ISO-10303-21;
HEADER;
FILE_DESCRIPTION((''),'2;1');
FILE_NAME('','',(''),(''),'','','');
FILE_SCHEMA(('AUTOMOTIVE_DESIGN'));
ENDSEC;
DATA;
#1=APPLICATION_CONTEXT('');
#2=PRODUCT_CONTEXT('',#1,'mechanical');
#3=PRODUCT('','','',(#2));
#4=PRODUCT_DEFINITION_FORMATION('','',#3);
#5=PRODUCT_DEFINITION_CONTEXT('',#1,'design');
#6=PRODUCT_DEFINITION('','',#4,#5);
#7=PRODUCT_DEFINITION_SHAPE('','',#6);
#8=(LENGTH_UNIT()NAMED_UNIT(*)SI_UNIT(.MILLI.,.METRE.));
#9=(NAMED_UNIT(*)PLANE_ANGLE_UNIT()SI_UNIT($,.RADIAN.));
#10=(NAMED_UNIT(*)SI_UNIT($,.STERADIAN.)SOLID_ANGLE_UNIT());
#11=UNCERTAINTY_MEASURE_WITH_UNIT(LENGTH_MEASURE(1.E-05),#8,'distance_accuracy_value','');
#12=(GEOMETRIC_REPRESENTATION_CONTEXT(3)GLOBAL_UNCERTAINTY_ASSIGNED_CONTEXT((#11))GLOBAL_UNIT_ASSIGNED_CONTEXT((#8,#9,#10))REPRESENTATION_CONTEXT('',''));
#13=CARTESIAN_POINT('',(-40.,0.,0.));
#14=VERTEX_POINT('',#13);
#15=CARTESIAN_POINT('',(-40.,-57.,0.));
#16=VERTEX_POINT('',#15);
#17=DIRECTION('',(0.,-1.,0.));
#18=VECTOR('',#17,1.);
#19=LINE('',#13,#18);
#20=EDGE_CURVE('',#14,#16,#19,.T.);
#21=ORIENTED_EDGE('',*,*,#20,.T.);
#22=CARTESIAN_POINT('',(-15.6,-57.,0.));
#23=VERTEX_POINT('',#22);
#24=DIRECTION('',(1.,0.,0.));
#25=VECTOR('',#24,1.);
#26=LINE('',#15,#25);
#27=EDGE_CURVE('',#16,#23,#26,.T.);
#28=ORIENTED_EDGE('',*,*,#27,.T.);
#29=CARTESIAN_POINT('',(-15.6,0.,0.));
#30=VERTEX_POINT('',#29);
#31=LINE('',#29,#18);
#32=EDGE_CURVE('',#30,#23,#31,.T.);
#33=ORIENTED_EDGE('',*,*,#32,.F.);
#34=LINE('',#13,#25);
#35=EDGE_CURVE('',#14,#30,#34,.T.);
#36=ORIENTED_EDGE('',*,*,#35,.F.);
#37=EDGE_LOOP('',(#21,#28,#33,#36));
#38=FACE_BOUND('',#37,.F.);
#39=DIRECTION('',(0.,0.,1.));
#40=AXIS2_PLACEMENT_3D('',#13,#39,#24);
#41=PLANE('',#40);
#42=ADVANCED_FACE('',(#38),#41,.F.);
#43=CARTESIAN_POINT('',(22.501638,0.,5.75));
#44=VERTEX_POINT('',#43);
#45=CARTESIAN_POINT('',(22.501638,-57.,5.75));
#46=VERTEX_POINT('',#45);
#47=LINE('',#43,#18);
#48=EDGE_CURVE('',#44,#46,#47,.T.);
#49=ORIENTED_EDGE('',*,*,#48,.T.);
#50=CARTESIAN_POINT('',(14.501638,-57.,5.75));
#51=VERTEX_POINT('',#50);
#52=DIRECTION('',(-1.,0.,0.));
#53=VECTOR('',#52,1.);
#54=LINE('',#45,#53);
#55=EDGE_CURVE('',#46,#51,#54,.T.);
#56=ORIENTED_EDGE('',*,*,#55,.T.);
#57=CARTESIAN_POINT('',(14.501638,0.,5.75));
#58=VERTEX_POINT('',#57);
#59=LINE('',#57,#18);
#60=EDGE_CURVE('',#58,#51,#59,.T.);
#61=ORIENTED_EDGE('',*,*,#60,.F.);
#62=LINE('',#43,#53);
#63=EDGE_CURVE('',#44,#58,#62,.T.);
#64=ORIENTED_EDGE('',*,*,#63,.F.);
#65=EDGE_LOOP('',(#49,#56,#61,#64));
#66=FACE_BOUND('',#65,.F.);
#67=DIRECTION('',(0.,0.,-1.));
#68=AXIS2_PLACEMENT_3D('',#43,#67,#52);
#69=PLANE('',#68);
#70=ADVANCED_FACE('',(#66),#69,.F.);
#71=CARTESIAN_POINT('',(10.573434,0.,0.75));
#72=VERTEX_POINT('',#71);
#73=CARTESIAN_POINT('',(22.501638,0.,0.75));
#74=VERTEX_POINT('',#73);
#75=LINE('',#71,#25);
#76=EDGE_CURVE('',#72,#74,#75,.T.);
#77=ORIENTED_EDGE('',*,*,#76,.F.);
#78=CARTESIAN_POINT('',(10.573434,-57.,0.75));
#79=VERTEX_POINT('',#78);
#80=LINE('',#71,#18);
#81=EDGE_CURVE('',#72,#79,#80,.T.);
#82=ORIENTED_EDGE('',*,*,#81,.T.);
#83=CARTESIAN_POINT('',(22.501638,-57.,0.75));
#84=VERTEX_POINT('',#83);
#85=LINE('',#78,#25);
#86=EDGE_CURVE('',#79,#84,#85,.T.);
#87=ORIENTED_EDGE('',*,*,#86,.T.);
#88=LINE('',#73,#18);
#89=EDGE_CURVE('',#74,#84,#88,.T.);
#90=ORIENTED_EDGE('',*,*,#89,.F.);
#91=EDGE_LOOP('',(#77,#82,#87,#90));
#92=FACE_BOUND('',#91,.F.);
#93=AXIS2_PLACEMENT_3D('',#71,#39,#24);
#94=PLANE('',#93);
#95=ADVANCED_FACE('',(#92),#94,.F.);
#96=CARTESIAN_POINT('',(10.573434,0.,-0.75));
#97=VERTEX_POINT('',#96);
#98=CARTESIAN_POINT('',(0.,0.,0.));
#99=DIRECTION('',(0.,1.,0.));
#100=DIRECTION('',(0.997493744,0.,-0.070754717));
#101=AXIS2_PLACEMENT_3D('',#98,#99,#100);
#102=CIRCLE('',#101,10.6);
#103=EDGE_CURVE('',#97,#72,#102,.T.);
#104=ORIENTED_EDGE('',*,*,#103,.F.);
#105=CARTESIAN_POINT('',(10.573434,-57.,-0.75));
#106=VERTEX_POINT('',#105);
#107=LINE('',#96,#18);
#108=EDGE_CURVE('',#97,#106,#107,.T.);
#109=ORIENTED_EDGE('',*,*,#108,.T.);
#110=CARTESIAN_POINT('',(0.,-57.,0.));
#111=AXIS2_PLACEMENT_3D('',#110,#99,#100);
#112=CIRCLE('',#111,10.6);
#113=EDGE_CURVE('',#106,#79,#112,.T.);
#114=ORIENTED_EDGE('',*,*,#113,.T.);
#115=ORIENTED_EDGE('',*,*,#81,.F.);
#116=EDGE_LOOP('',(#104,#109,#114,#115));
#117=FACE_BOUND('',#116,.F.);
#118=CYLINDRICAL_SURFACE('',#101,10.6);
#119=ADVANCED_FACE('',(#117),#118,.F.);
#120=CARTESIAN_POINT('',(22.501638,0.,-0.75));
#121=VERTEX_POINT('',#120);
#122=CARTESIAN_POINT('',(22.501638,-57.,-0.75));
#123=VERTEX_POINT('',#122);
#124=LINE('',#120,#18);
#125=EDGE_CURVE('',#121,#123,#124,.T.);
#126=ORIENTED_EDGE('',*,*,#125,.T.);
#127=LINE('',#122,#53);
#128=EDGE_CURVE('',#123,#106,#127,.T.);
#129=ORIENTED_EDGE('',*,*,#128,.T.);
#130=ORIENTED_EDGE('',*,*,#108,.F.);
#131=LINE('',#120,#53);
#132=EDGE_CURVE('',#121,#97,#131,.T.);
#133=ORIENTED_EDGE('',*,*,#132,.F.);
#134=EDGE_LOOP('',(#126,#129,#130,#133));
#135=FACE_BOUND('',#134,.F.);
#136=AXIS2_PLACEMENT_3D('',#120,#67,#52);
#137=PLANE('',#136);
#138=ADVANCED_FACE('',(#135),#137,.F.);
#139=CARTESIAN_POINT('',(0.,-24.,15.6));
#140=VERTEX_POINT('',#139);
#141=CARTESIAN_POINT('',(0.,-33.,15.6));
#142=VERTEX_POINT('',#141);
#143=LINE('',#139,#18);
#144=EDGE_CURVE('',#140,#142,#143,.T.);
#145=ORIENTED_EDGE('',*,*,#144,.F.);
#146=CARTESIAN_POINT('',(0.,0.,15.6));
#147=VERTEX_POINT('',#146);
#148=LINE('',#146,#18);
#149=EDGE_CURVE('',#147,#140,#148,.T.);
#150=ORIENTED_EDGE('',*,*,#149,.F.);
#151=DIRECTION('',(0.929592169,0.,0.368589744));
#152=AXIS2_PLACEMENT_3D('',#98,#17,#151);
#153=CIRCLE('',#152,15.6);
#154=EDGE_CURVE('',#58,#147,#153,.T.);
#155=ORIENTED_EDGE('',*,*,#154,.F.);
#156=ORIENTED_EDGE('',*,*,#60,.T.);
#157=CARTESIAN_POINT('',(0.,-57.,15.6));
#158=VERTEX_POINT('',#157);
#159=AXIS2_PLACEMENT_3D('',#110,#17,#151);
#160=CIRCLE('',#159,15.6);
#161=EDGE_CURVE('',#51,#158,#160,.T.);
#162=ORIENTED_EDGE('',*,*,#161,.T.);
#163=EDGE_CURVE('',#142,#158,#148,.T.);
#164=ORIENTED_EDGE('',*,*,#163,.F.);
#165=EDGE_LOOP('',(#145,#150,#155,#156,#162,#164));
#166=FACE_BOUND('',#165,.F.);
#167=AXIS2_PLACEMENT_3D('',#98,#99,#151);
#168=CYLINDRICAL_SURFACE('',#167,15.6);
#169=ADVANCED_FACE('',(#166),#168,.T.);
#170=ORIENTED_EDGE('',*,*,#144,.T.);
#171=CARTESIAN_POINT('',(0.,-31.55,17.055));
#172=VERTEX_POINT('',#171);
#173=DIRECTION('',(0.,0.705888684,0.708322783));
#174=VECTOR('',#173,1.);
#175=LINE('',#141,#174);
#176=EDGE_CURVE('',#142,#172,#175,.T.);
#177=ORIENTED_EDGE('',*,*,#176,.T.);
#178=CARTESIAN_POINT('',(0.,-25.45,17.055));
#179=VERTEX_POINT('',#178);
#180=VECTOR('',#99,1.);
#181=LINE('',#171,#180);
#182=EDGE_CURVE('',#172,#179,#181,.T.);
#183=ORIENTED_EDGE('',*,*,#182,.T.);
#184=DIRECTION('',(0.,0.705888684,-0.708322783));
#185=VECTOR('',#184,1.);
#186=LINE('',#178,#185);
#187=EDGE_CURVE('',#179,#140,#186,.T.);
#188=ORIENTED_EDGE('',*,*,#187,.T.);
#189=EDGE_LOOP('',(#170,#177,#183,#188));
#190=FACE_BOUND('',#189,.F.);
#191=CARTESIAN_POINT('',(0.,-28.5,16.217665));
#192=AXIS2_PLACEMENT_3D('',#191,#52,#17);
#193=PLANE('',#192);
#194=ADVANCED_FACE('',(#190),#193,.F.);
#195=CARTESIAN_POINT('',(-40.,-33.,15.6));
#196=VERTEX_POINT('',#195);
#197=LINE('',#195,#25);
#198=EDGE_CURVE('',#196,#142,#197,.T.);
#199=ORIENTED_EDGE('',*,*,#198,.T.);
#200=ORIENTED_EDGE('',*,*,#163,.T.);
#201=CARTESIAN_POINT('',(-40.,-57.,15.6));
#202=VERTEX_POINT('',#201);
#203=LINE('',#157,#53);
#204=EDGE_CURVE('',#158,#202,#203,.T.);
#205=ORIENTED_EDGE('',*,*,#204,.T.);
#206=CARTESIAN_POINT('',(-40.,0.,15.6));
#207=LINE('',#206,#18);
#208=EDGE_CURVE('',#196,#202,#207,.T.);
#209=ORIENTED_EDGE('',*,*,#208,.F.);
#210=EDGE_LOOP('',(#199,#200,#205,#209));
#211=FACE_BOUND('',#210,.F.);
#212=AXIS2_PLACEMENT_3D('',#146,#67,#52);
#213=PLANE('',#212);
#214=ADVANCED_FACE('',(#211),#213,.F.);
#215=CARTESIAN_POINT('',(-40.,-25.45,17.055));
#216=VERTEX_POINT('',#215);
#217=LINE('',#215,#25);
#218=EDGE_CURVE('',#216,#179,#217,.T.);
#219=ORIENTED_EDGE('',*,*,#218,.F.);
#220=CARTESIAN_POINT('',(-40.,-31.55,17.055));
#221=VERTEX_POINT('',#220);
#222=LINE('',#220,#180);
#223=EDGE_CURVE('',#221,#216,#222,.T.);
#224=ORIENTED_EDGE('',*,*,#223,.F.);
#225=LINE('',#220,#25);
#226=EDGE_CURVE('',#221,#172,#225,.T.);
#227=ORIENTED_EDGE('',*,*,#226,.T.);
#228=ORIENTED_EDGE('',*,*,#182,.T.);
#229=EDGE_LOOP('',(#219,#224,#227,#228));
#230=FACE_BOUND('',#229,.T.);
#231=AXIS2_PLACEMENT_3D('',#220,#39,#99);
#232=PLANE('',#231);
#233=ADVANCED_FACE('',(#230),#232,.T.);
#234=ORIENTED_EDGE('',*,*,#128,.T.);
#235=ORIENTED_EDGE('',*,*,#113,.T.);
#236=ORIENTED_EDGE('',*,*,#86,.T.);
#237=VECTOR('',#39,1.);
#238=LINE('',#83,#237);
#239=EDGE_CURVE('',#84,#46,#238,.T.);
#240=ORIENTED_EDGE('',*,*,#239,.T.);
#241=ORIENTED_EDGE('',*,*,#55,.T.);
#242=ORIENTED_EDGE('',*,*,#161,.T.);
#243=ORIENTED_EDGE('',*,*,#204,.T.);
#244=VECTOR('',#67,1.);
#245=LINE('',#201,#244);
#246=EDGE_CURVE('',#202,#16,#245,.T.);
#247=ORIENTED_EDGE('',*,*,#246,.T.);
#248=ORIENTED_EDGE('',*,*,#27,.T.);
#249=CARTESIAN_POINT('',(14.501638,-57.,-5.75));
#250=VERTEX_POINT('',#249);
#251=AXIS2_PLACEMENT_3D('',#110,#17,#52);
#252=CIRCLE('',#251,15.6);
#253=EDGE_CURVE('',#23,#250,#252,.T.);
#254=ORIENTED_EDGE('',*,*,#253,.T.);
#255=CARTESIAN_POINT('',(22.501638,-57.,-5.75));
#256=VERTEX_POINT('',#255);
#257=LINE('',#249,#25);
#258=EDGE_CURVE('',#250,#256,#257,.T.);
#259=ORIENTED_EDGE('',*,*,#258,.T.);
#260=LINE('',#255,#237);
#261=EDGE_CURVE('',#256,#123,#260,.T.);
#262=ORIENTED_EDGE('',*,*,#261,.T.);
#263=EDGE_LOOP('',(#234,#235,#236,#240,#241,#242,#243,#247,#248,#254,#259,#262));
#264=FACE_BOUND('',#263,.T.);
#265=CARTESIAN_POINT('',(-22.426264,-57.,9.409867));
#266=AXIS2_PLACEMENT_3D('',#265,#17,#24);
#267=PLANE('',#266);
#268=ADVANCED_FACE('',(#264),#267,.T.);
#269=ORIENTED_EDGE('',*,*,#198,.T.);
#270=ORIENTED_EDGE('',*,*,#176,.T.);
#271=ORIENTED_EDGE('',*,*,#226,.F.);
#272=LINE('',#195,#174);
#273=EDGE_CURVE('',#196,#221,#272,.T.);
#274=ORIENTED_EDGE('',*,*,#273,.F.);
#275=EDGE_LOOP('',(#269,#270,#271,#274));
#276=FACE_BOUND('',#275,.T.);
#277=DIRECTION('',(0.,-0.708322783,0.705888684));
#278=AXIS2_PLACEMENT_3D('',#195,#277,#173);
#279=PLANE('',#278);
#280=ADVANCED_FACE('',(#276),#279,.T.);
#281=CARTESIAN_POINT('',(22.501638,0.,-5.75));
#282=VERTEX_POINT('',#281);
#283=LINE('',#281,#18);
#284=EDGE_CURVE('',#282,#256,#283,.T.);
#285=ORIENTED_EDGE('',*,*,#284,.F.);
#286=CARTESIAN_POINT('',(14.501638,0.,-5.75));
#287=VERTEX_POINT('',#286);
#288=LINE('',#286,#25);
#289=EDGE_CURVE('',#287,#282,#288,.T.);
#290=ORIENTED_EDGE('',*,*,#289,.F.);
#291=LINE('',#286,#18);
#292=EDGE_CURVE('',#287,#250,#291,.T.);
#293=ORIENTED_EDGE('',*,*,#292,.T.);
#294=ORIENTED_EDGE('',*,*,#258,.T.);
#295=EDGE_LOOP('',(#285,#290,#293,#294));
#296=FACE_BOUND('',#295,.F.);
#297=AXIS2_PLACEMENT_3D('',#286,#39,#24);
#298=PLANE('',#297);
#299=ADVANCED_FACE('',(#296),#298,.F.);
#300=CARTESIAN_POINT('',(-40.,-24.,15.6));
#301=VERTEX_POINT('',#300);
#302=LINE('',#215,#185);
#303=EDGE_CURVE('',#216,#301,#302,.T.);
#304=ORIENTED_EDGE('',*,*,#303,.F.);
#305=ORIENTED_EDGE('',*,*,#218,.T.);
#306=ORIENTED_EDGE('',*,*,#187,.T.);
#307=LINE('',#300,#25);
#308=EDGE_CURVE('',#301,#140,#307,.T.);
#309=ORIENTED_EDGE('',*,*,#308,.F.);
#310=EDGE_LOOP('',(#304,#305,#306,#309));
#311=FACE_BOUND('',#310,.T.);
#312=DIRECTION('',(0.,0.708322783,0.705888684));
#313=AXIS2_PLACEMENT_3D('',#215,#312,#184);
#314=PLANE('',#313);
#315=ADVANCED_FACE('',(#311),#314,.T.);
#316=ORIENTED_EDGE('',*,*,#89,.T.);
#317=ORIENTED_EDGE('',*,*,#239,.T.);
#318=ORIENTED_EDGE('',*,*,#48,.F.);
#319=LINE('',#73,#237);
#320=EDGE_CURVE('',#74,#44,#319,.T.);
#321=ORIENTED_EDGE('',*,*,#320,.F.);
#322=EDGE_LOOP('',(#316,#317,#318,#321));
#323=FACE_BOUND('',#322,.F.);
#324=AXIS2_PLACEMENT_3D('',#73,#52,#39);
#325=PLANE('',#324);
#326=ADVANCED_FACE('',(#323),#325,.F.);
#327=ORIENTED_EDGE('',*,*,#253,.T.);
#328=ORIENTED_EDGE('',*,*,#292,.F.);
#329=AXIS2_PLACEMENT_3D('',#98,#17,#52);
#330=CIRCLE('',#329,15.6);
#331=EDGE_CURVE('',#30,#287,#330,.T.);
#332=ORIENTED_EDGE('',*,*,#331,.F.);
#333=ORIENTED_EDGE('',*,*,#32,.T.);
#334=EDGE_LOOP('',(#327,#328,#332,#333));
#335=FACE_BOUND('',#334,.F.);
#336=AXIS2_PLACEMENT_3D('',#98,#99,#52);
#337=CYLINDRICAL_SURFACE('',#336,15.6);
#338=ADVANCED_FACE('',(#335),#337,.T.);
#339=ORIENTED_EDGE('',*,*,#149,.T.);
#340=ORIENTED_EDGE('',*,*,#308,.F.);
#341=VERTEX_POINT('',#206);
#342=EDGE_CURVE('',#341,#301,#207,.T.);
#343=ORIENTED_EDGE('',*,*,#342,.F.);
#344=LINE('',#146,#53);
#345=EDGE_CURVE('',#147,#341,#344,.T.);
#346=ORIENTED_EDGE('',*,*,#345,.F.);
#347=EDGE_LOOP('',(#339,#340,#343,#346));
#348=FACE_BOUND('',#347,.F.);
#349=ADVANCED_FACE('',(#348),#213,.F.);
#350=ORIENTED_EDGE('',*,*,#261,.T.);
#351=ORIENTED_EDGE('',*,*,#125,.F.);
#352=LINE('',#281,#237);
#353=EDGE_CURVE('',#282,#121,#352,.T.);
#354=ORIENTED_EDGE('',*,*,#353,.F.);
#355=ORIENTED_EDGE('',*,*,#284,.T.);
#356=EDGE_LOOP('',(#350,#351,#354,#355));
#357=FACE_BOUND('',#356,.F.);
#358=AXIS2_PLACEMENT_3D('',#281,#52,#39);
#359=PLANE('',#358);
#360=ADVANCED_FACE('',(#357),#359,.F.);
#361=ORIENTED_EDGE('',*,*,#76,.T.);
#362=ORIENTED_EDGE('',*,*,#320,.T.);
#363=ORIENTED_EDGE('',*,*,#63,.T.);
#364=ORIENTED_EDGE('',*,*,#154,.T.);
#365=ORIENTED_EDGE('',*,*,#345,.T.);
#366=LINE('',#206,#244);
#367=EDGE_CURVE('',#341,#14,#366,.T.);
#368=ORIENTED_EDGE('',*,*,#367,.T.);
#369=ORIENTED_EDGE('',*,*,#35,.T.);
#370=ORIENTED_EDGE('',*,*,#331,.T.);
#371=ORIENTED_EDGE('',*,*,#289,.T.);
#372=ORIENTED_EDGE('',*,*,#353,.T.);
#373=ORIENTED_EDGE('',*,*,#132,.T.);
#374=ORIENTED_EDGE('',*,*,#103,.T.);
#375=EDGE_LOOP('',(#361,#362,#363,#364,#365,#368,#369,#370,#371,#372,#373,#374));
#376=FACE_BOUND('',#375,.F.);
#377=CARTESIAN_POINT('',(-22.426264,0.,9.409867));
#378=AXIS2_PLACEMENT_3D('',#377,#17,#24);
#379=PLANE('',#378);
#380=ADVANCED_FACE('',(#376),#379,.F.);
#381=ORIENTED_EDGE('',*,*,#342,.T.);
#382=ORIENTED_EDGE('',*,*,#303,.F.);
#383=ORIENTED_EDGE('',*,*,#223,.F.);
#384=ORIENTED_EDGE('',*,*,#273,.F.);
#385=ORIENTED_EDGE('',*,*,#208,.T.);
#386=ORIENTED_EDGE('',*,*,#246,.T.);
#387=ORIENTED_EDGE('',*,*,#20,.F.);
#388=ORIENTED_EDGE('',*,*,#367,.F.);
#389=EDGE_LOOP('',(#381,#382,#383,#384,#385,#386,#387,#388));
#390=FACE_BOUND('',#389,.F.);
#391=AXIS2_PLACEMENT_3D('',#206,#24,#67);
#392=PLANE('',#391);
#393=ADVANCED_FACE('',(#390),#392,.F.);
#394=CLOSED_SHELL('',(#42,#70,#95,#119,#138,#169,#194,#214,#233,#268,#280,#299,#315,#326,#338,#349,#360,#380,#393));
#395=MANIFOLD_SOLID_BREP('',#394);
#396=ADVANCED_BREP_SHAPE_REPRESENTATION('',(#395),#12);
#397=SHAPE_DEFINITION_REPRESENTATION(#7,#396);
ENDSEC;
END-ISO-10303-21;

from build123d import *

# Parameters (mm, degrees)
F1_DEPTH = 57
F3_DEPTH = 40


# Not quite as in the source:
# - a feature of the source that left no trace in its solid (it failed there, or was rolled back) is left out


with BuildPart() as f1:
    # F0 (on Front) → F1 (new body)
    with BuildSketch(Plane.XZ):
        with BuildLine():
            ThreePointArc((-15.6, 0), (-11.0308657865, 11.0308657865), (0, 15.6))
            Line((0, 15.6), (-40, 15.6))
            Line((-40, 15.6), (-40, 0))
            Line((-40, 0), (-15.6, 0))
        make_face()
        with BuildLine():
            ThreePointArc((10.5734336902, -0.75), (-10.6, 0), (10.5734336902, 0.75))
            Line((10.5734336902, 0.75), (15.5819607239, 0.75))
            ThreePointArc((15.5819607239, 0.75), (15.2481384312, 3.2945825812), (14.5016378385, 5.75))
            ThreePointArc((14.5016378385, 5.75), (8.765272386, 12.9046503246), (0, 15.6))
            ThreePointArc((0, 15.6), (-11.0308657865, 11.0308657865), (-15.6, 0))
            ThreePointArc((-15.6, 0), (-2.9269822103, -15.3229492964), (14.5016378385, -5.75))
            ThreePointArc((14.5016378385, -5.75), (15.2481384312, -3.2945825812), (15.5819607239, -0.75))
            Line((15.5819607239, -0.75), (10.5734336902, -0.75))
        make_face()
        with BuildLine():
            ThreePointArc((14.5016378385, 5.75), (15.2481384312, 3.2945825812), (15.5819607239, 0.75))
            Line((15.5819607239, 0.75), (22.5016378385, 0.75))
            Line((22.5016378385, 0.75), (22.5016378385, 5.75))
            Line((22.5016378385, 5.75), (14.5016378385, 5.75))
        make_face()
        with BuildLine():
            Line((22.5016378385, -0.75), (15.5819607239, -0.75))
            ThreePointArc((15.5819607239, -0.75), (15.2481384312, -3.2945825812), (14.5016378385, -5.75))
            Line((14.5016378385, -5.75), (22.5016378385, -5.75))
            Line((22.5016378385, -5.75), (22.5016378385, -0.75))
        make_face()
    extrude(amount=F1_DEPTH)

    # F2 (on face) → F3 (join)
    with BuildSketch(Plane(origin=(-40, 0, 0), x_dir=(0, -1, 0), z_dir=(-1, 0, 0))):
        Polygon((25.45, 17.055), (24, 15.6), (33, 15.6), (31.55, 17.055), align=None)
    extrude(amount=-F3_DEPTH)


solid = f1.part
